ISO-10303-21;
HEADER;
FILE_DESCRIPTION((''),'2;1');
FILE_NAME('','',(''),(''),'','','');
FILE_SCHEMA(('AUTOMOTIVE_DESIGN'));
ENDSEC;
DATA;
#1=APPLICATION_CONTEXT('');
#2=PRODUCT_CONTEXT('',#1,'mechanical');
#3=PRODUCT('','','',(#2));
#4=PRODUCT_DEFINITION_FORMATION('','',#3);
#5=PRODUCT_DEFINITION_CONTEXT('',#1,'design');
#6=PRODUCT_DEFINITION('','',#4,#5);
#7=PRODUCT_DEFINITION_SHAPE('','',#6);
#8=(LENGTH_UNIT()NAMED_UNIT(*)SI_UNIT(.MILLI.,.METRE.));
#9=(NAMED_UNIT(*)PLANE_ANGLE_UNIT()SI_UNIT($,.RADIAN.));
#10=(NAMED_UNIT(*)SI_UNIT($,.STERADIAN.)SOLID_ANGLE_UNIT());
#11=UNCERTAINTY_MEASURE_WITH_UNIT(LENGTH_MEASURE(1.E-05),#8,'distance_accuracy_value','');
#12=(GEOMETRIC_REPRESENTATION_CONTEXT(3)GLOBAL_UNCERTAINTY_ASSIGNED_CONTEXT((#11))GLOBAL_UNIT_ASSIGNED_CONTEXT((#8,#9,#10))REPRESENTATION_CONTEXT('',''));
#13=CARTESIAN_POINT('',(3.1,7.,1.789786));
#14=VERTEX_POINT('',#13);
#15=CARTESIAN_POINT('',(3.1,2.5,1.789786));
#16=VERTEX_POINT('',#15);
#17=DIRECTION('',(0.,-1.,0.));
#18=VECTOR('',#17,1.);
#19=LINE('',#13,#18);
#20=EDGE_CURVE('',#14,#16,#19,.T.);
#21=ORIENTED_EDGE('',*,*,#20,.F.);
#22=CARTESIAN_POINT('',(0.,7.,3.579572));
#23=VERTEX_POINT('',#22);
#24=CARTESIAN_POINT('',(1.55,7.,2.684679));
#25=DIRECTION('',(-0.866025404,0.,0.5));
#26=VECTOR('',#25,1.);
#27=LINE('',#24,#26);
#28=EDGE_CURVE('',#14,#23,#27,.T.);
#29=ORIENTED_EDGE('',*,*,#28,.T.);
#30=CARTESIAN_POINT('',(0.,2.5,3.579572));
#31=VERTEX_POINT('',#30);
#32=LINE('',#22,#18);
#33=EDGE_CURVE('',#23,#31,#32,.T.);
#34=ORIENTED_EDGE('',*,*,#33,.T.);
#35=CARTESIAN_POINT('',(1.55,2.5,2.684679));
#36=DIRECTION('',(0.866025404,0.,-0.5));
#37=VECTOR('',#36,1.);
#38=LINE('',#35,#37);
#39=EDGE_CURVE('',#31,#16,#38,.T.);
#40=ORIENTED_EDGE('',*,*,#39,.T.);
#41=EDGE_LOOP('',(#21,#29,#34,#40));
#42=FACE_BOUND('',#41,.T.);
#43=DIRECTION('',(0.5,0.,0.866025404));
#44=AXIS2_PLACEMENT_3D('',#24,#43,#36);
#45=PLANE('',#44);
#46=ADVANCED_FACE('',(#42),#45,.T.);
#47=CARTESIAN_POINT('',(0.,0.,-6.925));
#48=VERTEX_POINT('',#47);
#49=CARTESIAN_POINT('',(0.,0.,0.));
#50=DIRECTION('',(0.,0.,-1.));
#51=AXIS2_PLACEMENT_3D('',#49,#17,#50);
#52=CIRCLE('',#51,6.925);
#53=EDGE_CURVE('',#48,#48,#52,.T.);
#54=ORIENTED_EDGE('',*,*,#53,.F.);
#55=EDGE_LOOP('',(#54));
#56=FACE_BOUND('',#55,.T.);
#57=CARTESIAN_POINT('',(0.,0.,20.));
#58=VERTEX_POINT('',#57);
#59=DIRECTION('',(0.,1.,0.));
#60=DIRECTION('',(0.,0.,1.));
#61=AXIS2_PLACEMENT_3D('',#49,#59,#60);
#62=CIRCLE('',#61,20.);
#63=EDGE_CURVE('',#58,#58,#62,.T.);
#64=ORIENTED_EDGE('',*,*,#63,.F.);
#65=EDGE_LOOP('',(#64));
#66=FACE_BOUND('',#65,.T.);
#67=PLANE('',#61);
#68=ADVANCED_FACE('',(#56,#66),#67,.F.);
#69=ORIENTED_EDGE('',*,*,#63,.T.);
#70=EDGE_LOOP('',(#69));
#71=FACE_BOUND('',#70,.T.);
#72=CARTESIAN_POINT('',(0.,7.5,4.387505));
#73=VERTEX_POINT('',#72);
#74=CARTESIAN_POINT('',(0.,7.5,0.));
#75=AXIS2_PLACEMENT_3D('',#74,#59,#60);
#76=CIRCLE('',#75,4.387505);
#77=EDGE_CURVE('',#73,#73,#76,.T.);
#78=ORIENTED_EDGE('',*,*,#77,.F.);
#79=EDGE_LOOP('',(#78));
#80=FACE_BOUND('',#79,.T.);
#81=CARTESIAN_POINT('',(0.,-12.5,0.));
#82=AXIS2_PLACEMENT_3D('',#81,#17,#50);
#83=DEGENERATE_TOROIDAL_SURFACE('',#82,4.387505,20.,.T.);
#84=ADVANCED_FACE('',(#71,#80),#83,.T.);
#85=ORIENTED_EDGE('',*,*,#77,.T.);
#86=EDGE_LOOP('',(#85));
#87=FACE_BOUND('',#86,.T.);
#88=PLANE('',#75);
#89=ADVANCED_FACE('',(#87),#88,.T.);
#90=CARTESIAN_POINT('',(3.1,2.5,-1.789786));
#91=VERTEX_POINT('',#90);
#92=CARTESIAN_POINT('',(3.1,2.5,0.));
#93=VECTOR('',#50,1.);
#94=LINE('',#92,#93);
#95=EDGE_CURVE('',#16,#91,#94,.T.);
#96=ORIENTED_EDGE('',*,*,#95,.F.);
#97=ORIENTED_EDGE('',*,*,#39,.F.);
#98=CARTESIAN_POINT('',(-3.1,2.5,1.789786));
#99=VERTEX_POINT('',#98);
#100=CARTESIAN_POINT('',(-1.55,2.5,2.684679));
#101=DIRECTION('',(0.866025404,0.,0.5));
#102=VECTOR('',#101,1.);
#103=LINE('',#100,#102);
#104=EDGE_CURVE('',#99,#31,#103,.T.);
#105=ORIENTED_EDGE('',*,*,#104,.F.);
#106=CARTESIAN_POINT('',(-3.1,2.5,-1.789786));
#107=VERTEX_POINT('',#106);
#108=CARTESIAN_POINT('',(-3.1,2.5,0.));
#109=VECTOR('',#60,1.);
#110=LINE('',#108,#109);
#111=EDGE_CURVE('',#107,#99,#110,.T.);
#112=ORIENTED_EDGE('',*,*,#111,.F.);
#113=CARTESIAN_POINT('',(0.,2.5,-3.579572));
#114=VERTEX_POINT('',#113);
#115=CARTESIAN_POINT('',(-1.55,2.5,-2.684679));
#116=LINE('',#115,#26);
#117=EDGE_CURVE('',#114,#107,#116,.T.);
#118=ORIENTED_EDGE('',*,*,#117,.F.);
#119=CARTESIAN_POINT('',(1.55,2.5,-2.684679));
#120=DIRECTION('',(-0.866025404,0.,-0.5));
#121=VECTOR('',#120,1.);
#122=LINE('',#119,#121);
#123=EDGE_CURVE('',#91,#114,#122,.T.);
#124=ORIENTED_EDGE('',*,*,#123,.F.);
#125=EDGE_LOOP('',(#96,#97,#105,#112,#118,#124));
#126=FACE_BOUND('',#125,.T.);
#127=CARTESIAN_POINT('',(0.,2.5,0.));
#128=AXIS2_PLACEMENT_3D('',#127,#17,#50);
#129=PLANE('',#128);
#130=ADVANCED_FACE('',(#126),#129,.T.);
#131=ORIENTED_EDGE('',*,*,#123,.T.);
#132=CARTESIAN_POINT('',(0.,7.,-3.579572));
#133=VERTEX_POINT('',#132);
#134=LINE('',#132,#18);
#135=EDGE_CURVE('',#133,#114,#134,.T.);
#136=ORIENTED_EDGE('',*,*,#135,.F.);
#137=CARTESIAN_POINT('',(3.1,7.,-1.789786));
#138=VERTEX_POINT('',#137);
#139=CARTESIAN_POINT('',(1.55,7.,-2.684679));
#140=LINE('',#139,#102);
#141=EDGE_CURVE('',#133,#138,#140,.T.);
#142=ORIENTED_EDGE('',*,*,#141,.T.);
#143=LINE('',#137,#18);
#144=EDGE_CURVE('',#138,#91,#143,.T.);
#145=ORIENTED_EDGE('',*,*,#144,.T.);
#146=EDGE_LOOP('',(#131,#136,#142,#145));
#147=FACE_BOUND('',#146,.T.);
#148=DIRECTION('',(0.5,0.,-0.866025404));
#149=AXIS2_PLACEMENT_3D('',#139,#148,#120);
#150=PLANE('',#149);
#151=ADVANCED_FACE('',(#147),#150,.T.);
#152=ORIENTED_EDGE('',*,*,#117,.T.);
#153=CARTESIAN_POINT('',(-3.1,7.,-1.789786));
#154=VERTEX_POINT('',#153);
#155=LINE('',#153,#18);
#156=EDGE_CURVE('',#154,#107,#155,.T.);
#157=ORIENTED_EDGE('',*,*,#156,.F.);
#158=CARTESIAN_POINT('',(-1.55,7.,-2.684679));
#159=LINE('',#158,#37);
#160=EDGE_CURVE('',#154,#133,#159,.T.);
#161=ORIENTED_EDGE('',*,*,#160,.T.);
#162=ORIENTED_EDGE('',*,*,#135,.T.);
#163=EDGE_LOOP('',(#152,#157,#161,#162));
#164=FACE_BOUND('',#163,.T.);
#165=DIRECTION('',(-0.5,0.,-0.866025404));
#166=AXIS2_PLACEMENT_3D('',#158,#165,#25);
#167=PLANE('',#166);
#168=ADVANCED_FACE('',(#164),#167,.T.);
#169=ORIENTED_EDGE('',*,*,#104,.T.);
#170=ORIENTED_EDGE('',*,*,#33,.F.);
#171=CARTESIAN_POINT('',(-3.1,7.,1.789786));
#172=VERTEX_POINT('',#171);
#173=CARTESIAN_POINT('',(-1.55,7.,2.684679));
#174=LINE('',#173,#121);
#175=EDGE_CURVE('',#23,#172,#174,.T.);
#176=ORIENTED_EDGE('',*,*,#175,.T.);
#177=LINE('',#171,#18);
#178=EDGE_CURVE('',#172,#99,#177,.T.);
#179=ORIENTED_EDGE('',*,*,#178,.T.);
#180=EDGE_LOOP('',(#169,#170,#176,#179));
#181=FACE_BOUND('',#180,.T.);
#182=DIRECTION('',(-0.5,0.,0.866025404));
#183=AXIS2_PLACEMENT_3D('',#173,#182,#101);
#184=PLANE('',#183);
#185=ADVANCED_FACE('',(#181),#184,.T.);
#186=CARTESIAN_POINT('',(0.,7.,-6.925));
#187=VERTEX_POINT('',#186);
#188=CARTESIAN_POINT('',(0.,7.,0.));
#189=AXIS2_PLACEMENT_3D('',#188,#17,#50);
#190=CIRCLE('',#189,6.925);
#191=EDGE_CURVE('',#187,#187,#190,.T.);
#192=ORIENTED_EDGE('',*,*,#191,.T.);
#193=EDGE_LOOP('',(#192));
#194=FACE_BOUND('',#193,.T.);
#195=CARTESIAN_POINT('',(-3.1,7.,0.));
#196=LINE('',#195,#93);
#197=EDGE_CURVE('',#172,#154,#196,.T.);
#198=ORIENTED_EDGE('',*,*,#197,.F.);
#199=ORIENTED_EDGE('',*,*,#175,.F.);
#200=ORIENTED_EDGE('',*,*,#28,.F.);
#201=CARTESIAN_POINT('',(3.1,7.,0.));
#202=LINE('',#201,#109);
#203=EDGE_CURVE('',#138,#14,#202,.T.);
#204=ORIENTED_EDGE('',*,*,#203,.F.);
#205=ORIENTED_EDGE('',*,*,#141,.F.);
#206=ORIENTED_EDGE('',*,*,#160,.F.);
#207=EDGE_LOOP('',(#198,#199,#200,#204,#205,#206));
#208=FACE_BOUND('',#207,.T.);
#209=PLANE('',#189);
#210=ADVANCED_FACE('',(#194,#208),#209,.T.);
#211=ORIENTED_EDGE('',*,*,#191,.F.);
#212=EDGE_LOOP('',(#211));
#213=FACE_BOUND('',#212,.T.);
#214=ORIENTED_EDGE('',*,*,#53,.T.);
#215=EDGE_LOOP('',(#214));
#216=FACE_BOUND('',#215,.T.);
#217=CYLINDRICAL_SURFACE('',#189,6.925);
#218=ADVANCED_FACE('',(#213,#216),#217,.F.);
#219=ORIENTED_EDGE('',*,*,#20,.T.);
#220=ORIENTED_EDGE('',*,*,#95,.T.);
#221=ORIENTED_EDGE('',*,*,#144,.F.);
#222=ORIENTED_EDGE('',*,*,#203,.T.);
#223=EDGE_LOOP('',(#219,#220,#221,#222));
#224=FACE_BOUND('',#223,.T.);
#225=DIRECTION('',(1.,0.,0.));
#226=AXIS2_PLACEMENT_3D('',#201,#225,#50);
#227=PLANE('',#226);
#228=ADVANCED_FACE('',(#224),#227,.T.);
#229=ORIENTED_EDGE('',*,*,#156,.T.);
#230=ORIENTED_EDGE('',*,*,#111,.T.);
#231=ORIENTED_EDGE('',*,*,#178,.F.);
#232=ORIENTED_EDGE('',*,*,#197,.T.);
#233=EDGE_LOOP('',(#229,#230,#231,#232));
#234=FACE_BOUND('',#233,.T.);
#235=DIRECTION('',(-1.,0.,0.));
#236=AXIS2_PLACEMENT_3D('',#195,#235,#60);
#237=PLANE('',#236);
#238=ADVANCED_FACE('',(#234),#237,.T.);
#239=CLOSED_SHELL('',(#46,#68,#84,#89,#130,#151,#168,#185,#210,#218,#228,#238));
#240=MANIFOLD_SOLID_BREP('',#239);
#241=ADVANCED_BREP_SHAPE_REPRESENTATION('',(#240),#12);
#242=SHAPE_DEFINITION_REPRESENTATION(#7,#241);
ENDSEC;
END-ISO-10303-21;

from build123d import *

# Parameters (mm, degrees)
SKETCH1_R           = 20
BOSS_EXTRUDE1_DEPTH = 7.5
FILLET1_R           = 20
SKETCH2_R           = 6.925
CUT_EXTRUDE1_DEPTH  = 7
SKETCH3_R           = 4.558249482
CUT_EXTRUDE2_DEPTH  = 2.5


with BuildPart() as part:
    # Sketch1 → Boss-Extrude1 (new body)
    with BuildSketch(Plane(origin=(0, 0, 0), x_dir=(1, 0, 0), z_dir=(0, 1, 0))):
        with Locations(Location((0, 0, 0), (0, 0, 270))):
            Circle(SKETCH1_R)
    extrude(amount=BOSS_EXTRUDE1_DEPTH)

    # Fillet1
    # the kernel refuses this fillet: 20 mm, written as the material it takes off along each edge
    with BuildSketch(Plane(origin=(0, 7.5, 0), x_dir=(0, 0, 1), z_dir=(-1, 0, 0))) as fillet1_piece_1:
        with BuildLine():
            CenterArc((4.387505004, -20), FILLET1_R, 38.682187453, 51.317812547)
            Line((4.387505004, 0), (4.387505004, 0.4))
            Line((4.387505004, 0.4), (20, 0.4))
            Line((20, 0.4), (20.4, 0))
            ThreePointArc((20.4, 0), (20.4, -3.75), (20.3122499, -7.25))
            Line((20.3122499, -7.25), (20, -7.5))
        make_face()
    revolve(axis=Axis((0, 7.5, 0), (0, 1, 0)), mode=Mode.SUBTRACT)

    # Sketch2 → Cut-Extrude1 (cut)
    with BuildSketch(Plane.XZ):
        with Locations(Location((0, 0, 0), (0, 0, 270))):
            Circle(SKETCH2_R)
        Polygon((3.1, -1.789785834), (3.1, 1.789785834), (0, 3.579571669), (-3.1, 1.789785834), (-3.1, -1.789785834), (0, -3.579571669), align=None, mode=Mode.SUBTRACT)
    extrude(amount=-CUT_EXTRUDE1_DEPTH, mode=Mode.SUBTRACT)

    # Sketch3 → Cut-Extrude2 (cut)
    with BuildSketch(Plane.XZ):
        Circle(SKETCH3_R)
    extrude(amount=-CUT_EXTRUDE2_DEPTH, mode=Mode.SUBTRACT)


solid = part.part
